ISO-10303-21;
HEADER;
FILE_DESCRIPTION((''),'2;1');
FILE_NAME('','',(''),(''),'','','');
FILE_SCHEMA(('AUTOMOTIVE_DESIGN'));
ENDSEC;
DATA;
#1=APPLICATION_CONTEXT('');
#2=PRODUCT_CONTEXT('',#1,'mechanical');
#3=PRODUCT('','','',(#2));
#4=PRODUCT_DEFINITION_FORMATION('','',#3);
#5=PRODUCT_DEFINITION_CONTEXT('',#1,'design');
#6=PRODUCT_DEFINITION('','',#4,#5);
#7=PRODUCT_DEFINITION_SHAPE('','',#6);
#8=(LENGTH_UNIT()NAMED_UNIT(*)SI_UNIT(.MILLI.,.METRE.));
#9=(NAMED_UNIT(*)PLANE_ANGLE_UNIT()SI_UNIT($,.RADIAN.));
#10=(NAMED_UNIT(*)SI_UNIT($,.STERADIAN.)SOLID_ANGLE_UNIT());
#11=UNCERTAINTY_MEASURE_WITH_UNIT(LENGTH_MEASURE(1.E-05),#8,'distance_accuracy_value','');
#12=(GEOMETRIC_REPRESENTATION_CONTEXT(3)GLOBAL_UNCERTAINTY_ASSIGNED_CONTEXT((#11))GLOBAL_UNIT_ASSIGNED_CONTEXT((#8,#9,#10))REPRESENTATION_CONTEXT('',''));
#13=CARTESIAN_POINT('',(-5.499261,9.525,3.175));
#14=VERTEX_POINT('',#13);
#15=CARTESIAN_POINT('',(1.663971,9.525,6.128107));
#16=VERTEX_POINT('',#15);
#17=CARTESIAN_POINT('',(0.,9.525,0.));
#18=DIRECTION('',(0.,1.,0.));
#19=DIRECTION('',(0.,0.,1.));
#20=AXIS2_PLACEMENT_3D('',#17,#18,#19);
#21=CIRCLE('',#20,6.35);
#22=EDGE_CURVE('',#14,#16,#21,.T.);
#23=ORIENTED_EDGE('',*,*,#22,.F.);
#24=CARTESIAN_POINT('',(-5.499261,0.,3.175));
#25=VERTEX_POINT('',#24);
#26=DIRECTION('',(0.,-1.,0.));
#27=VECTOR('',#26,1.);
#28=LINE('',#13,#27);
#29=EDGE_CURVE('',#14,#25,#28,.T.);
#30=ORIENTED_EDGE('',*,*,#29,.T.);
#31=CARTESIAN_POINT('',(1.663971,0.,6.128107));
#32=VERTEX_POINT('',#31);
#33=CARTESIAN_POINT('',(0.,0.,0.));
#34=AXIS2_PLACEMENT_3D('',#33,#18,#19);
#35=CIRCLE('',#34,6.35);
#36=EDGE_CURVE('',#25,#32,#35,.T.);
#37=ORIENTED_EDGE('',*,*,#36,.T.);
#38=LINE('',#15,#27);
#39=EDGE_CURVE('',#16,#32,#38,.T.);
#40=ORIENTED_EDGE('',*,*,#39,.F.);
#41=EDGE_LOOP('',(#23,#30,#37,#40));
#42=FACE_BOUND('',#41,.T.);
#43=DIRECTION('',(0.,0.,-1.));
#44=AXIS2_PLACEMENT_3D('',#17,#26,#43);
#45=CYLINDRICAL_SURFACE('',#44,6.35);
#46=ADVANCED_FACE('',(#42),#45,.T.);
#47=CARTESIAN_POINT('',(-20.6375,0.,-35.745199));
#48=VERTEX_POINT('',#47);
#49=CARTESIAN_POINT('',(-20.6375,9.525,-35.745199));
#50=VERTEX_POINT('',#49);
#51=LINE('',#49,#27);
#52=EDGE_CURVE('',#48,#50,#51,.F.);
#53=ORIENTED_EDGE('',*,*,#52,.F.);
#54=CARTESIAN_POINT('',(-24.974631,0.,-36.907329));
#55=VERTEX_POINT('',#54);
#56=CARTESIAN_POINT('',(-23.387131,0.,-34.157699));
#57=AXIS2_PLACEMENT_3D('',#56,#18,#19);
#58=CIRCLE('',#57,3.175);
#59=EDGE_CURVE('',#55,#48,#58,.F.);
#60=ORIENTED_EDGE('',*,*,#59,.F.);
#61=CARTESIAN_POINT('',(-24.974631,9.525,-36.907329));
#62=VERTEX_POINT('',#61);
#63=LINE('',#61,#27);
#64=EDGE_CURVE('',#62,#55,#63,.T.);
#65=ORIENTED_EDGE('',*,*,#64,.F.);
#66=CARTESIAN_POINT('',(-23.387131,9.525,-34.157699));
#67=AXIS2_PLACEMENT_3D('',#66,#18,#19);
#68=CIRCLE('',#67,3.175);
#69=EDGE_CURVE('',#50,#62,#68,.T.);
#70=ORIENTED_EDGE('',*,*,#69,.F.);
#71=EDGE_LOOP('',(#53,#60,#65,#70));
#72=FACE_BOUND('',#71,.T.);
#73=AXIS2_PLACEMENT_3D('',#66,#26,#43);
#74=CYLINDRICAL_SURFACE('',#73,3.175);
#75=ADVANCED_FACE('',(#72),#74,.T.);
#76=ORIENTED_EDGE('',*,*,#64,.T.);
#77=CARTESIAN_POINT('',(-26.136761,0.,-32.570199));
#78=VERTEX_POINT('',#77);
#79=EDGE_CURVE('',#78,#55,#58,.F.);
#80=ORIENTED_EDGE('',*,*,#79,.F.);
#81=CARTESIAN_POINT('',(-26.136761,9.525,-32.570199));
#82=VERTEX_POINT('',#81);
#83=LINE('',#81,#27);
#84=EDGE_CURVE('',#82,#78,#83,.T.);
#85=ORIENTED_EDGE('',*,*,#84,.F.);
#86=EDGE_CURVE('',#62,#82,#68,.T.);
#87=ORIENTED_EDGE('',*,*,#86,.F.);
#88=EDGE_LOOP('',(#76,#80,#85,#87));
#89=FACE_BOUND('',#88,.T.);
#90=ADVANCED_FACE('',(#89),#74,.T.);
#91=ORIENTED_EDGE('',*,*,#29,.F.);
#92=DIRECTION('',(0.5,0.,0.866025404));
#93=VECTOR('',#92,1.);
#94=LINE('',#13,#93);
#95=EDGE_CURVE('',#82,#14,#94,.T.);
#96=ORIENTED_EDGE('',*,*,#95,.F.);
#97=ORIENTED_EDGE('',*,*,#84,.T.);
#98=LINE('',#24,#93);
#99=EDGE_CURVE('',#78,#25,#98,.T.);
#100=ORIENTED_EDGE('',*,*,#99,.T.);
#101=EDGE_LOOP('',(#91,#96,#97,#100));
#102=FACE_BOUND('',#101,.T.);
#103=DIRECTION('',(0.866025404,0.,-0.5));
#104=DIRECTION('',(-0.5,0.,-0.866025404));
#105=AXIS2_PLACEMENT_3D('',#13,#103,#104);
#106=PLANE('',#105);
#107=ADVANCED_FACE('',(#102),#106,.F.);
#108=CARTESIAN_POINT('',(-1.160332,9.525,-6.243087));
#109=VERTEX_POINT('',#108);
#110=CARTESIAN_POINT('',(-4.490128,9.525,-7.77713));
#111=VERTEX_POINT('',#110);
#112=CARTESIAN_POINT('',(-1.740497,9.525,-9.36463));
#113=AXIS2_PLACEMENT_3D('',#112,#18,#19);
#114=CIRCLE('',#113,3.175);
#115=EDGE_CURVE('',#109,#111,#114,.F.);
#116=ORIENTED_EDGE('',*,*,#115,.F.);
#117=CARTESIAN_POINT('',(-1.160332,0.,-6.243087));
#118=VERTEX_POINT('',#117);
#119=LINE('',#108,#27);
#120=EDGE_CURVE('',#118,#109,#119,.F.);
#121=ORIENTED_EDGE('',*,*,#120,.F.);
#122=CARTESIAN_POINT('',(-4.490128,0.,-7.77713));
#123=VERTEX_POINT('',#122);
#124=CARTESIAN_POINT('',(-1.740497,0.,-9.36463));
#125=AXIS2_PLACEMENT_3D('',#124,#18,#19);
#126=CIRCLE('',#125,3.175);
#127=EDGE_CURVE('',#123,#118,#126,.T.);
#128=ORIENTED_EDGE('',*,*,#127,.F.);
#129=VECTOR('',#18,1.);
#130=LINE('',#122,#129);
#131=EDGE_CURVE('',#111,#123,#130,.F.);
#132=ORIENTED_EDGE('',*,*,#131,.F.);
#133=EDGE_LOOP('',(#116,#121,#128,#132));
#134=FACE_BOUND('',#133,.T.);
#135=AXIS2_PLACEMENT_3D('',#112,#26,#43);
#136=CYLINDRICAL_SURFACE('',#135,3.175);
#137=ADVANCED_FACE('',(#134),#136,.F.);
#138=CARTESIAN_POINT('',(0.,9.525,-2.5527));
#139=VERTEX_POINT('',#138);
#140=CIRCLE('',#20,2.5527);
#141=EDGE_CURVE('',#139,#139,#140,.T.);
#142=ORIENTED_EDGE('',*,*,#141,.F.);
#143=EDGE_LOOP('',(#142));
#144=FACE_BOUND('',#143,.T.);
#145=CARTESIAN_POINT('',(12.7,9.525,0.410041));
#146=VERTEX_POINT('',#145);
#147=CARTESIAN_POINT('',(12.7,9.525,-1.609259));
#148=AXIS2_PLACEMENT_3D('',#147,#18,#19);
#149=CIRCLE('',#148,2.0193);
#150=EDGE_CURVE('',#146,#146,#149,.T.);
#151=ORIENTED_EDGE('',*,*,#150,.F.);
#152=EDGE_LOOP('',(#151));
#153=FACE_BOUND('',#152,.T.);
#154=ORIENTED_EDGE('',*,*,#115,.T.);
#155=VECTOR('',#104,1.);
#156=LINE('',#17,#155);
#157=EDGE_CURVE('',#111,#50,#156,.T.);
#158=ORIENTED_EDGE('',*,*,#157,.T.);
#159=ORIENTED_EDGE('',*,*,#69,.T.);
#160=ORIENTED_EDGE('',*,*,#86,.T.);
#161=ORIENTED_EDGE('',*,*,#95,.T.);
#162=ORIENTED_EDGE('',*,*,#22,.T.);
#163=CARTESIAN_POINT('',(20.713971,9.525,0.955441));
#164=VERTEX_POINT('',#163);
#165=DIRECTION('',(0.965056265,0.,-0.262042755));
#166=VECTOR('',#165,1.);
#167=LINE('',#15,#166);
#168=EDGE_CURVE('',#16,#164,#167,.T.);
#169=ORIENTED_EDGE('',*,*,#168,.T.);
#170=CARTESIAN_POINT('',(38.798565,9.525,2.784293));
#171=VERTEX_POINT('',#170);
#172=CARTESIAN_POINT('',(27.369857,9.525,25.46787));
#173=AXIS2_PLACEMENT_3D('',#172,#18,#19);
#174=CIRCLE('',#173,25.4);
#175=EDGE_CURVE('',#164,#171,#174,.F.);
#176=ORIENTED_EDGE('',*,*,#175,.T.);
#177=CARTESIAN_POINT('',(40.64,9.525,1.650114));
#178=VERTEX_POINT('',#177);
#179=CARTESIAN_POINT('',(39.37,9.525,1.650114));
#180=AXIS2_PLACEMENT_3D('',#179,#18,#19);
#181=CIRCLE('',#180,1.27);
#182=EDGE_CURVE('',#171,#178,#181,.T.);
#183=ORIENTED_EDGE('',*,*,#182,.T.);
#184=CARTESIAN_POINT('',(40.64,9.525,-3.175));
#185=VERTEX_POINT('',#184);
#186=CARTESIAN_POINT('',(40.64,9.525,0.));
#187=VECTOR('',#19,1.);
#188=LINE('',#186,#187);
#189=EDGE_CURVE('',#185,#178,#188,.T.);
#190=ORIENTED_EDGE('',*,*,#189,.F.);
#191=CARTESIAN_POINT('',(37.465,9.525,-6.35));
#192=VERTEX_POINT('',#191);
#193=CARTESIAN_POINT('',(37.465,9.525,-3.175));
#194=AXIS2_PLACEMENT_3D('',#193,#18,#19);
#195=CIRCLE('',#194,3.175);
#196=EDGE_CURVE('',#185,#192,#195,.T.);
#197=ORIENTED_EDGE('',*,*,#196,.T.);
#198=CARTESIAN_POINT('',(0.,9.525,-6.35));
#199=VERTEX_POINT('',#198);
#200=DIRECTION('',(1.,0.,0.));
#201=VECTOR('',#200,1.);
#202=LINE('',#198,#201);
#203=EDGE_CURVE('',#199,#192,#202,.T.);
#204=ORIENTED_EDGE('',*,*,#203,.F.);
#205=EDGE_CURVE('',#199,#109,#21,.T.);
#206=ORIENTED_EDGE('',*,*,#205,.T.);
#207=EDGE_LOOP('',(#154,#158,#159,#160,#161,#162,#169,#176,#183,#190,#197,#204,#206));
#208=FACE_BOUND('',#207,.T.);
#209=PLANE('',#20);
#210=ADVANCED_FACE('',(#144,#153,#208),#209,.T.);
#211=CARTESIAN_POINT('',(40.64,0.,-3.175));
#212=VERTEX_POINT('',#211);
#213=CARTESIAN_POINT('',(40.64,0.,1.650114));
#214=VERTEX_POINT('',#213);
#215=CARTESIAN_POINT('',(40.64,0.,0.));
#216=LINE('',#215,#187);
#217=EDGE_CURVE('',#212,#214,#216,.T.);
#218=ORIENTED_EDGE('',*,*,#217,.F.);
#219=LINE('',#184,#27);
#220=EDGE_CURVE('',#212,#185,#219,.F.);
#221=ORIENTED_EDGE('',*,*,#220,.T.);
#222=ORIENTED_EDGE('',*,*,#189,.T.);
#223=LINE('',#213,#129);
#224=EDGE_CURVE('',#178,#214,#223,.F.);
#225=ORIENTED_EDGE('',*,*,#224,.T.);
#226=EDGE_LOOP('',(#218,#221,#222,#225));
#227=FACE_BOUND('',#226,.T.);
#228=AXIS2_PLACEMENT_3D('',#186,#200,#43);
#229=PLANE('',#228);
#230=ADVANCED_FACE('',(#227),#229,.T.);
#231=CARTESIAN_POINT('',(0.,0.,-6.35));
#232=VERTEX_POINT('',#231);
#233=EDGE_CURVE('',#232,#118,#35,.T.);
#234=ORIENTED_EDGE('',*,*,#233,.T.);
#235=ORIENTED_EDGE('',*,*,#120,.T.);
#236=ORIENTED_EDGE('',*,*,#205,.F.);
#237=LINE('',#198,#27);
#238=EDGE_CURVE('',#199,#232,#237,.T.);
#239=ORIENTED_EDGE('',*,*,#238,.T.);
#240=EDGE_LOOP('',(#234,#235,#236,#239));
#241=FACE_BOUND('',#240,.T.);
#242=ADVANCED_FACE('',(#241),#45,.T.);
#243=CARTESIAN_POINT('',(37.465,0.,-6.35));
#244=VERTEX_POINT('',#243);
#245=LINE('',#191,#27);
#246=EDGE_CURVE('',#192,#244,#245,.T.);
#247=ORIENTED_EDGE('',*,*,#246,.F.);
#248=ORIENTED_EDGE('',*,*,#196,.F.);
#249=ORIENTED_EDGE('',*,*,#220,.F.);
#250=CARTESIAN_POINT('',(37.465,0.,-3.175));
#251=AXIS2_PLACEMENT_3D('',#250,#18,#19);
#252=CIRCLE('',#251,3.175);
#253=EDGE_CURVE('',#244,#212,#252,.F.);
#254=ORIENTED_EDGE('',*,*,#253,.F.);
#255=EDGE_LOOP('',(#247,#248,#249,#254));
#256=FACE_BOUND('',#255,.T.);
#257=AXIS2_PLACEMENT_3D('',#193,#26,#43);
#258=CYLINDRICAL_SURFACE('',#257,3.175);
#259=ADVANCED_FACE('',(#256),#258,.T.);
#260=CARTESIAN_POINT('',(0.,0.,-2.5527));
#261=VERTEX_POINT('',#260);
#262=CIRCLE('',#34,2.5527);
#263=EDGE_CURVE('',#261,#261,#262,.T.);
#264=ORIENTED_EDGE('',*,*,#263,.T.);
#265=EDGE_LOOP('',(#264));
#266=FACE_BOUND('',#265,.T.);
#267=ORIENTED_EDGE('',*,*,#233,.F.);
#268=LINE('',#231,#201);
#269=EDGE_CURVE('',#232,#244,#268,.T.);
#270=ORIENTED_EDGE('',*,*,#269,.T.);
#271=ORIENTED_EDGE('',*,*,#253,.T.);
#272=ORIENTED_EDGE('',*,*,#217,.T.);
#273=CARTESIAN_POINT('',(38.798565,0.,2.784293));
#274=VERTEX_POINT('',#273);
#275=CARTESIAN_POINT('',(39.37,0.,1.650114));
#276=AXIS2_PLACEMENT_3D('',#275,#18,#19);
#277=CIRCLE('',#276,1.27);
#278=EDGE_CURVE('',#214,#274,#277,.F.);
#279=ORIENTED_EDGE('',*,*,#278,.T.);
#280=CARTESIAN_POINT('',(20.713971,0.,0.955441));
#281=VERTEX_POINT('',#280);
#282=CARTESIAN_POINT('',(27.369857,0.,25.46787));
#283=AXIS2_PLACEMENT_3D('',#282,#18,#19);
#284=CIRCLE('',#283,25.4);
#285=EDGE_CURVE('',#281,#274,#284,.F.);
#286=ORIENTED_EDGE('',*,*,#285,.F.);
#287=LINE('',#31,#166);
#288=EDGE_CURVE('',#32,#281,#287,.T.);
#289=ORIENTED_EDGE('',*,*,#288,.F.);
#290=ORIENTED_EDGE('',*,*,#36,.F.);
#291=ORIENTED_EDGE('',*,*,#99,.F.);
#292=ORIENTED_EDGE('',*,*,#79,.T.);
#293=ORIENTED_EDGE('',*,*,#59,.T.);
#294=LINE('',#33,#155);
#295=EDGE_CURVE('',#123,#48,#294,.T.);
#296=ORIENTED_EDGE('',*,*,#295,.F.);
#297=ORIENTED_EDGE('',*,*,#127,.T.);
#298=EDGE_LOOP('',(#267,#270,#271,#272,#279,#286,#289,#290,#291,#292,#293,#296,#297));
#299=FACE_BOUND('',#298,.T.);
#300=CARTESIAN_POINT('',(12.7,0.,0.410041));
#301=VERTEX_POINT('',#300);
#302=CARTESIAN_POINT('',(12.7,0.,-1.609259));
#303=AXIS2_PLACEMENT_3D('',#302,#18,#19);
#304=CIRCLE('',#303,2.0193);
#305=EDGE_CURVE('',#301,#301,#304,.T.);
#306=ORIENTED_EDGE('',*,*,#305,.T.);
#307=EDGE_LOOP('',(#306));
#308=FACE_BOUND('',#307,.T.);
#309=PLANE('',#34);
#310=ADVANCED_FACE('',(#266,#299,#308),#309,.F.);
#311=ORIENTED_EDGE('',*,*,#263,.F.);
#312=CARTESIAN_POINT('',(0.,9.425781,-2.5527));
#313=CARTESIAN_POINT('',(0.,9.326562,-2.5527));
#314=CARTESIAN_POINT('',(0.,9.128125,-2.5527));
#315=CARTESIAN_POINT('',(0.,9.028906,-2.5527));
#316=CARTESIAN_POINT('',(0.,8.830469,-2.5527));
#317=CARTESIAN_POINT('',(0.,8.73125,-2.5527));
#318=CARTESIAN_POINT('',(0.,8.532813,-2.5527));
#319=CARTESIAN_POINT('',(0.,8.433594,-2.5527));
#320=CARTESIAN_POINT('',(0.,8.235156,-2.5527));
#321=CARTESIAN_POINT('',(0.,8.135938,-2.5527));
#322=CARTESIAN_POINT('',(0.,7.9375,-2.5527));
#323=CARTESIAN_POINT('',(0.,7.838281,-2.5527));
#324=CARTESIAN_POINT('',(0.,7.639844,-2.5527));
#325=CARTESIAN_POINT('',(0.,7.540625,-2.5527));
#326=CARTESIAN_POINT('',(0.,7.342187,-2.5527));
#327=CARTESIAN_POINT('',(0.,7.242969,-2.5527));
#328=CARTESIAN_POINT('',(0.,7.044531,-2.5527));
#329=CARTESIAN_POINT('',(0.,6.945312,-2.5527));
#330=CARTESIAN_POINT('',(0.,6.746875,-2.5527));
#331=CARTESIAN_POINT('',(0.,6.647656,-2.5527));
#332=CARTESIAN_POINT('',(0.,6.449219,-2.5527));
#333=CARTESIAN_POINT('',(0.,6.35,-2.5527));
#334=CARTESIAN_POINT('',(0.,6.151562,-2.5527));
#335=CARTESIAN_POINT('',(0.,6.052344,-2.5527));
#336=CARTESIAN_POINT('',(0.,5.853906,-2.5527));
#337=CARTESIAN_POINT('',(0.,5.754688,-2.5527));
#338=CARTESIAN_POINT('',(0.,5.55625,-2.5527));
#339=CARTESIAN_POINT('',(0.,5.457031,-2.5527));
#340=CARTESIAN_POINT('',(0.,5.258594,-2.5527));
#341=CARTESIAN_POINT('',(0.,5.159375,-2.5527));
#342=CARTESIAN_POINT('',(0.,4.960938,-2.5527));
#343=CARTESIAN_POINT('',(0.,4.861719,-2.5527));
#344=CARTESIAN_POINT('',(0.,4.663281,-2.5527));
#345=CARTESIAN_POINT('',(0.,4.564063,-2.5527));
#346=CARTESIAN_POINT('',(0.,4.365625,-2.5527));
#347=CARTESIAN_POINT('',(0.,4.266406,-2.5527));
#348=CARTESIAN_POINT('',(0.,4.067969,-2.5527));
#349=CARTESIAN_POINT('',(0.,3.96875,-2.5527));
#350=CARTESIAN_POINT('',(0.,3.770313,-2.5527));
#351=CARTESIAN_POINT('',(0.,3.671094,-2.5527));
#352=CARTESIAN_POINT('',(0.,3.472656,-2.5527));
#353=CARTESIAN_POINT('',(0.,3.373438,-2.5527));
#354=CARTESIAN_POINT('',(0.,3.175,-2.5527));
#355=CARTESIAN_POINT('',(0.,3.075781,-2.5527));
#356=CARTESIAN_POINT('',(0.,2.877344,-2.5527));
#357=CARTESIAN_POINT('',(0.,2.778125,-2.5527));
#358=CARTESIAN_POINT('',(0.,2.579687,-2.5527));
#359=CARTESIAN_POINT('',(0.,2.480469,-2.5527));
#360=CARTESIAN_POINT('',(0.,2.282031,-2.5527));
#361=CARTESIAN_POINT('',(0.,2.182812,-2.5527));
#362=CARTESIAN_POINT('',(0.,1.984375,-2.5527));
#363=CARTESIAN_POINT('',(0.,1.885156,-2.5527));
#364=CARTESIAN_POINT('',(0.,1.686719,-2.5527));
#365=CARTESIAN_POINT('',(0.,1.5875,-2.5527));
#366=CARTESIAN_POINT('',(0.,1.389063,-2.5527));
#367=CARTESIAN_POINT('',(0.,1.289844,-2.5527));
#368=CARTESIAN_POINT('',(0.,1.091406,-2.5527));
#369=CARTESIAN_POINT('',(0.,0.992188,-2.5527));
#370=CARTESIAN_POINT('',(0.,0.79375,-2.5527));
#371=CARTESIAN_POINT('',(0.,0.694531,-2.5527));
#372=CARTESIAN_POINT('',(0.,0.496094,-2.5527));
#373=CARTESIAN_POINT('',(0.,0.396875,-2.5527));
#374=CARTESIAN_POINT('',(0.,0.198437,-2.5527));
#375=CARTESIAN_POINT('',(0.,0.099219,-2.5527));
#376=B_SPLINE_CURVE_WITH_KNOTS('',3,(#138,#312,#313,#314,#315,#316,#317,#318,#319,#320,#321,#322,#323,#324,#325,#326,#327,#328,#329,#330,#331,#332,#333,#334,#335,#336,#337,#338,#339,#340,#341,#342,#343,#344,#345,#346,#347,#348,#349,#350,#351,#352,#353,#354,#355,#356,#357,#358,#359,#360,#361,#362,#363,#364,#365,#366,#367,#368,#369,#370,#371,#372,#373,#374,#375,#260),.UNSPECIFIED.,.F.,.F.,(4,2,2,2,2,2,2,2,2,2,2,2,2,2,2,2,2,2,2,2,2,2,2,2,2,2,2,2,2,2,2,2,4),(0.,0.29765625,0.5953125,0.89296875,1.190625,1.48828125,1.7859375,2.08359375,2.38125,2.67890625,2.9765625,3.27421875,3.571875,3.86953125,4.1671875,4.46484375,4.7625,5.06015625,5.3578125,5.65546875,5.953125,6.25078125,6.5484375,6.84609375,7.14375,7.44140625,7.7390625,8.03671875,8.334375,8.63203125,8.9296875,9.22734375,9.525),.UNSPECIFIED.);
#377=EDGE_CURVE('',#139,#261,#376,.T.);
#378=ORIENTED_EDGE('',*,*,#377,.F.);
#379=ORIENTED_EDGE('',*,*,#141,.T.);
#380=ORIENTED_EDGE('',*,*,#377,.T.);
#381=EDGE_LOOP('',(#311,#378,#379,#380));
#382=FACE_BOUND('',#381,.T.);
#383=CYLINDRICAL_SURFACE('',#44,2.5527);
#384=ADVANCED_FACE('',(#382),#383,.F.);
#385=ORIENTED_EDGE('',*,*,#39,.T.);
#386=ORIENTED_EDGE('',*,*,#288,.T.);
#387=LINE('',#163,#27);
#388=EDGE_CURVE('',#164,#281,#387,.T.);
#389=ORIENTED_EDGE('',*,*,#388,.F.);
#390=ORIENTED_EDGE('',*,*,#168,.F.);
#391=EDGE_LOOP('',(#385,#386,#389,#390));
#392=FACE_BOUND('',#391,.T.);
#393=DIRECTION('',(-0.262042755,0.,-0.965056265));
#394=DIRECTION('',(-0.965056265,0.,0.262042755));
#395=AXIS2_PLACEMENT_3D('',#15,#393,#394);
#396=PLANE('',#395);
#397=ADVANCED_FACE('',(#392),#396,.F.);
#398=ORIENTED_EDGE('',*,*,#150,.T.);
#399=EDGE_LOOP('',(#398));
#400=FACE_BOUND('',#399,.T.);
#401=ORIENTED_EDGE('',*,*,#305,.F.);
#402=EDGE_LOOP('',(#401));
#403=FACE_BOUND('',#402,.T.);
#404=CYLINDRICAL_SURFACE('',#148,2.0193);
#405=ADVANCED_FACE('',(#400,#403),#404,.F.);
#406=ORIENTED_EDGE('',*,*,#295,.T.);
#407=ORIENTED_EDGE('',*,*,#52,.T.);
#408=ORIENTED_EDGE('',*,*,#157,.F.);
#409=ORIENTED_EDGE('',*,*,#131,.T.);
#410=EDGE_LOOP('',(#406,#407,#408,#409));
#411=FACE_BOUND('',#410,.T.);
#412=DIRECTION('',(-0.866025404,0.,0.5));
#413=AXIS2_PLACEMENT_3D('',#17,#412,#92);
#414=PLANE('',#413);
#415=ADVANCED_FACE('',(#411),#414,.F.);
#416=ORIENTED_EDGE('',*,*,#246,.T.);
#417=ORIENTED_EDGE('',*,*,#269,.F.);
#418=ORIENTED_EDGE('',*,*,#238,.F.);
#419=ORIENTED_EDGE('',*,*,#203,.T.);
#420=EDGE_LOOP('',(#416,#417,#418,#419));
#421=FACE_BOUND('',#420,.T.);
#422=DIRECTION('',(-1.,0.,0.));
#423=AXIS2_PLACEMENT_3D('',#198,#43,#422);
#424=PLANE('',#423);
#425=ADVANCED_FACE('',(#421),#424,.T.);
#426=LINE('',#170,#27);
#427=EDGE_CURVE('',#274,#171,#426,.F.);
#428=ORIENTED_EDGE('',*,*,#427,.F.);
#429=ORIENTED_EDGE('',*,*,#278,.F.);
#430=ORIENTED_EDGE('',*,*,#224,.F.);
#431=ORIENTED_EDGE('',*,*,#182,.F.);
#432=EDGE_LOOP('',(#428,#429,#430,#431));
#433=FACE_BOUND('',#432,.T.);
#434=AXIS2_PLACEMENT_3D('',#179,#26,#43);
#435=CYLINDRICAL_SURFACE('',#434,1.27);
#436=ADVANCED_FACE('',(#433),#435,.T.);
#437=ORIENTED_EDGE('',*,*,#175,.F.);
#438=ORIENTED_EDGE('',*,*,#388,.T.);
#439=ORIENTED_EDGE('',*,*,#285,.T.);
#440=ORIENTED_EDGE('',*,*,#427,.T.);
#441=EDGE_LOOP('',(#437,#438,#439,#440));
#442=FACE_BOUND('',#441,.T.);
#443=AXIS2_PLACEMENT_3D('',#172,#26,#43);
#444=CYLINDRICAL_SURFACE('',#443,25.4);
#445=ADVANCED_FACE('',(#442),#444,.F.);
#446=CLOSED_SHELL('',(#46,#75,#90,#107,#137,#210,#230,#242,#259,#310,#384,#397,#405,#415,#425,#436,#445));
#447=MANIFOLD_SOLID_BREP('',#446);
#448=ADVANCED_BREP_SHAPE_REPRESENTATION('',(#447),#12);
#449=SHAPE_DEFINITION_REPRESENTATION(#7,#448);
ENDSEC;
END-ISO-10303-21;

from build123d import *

# Parameters (mm, degrees)
SKETCH1_R              = 6.35
SKETCH1_R_2            = 2.5527
BOSS_EXTRUDE1_DEPTH    = 9.525
FILLET1_R              = 3.175
FILLET2_R              = 1.27
F_10_32_TAPPED_HOLE1_D = 4.0386


with BuildPart() as part:
    # Sketch1 → Boss-Extrude1 (new body)
    # profile 1 of 3: a face of its own
    with BuildSketch(Plane(origin=(0, 0, 0), x_dir=(1, 0, 0), z_dir=(0, 1, 0))):
        Circle(SKETCH1_R)
        with Locations(Location((0, 0, 0), (0, 0, 90))):
            Circle(SKETCH1_R_2, mode=Mode.SUBTRACT)
    # profile 2 of 3: a face of its own
    with BuildSketch(Plane(origin=(0, 0, 0), x_dir=(1, 0, 0), z_dir=(0, 1, 0))):
        with BuildLine():
            Line((40.64, 6.35), (0, 6.35))
            ThreePointArc((0, 6.35), (4.490128061, 4.490128061), (6.35, 0))
            ThreePointArc((6.35, 0), (5.044240229, -3.857219271), (1.663971494, -6.128107283))
            Line((1.663971494, -6.128107283), (20.713971494, -0.955440505))
            ThreePointArc((20.713971494, -0.955440505), (30.971832611, -0.32456486), (40.64, -3.81))
            Line((40.64, -3.81), (40.64, 6.35))
        make_face()
    # profile 3 of 3: a face of its own
    with BuildSketch(Plane(origin=(0, 0, 0), x_dir=(1, 0, 0), z_dir=(0, 1, 0))):
        with BuildLine():
            ThreePointArc((-5.499261314, -3.175), (-6.133628997, 1.643500936), (-3.175, 5.499261314))
            Line((-3.175, 5.499261314), (-22.225, 38.494829198))
            Line((-22.225, 38.494829198), (-27.724261314, 35.319829198))
            Line((-27.724261314, 35.319829198), (-5.499261314, -3.175))
        make_face()
    extrude(amount=BOSS_EXTRUDE1_DEPTH)

    # Fillet1
    fillet1_edges = [part.edges().sort_by_distance(p)[0] for p in [
        (40.64, 4.7625, -6.35),
        (-3.175, 4.7625, -5.499261314),
        (-27.724261314, 4.7625, -35.319829198),
        (-22.225, 4.7625, -38.494829198),
    ]]
    fillet(fillet1_edges, radius=FILLET1_R - 0.0001)  # a hair under: the kernel refuses the full size

    # Fillet2
    fillet2_edges = [part.edges().sort_by_distance(p)[0] for p in [
        (40.64, 4.7625, 3.81),
    ]]
    fillet(fillet2_edges, radius=FILLET2_R)

    # #10-32 Tapped Hole1 (through all)
    with Locations(Plane(origin=(0, 9.525, 0), x_dir=(1, 0, 0), z_dir=(0, 1, 0))):
        with Locations((12.7, 1.609258642)):
            Hole(F_10_32_TAPPED_HOLE1_D / 2)


solid = part.part
